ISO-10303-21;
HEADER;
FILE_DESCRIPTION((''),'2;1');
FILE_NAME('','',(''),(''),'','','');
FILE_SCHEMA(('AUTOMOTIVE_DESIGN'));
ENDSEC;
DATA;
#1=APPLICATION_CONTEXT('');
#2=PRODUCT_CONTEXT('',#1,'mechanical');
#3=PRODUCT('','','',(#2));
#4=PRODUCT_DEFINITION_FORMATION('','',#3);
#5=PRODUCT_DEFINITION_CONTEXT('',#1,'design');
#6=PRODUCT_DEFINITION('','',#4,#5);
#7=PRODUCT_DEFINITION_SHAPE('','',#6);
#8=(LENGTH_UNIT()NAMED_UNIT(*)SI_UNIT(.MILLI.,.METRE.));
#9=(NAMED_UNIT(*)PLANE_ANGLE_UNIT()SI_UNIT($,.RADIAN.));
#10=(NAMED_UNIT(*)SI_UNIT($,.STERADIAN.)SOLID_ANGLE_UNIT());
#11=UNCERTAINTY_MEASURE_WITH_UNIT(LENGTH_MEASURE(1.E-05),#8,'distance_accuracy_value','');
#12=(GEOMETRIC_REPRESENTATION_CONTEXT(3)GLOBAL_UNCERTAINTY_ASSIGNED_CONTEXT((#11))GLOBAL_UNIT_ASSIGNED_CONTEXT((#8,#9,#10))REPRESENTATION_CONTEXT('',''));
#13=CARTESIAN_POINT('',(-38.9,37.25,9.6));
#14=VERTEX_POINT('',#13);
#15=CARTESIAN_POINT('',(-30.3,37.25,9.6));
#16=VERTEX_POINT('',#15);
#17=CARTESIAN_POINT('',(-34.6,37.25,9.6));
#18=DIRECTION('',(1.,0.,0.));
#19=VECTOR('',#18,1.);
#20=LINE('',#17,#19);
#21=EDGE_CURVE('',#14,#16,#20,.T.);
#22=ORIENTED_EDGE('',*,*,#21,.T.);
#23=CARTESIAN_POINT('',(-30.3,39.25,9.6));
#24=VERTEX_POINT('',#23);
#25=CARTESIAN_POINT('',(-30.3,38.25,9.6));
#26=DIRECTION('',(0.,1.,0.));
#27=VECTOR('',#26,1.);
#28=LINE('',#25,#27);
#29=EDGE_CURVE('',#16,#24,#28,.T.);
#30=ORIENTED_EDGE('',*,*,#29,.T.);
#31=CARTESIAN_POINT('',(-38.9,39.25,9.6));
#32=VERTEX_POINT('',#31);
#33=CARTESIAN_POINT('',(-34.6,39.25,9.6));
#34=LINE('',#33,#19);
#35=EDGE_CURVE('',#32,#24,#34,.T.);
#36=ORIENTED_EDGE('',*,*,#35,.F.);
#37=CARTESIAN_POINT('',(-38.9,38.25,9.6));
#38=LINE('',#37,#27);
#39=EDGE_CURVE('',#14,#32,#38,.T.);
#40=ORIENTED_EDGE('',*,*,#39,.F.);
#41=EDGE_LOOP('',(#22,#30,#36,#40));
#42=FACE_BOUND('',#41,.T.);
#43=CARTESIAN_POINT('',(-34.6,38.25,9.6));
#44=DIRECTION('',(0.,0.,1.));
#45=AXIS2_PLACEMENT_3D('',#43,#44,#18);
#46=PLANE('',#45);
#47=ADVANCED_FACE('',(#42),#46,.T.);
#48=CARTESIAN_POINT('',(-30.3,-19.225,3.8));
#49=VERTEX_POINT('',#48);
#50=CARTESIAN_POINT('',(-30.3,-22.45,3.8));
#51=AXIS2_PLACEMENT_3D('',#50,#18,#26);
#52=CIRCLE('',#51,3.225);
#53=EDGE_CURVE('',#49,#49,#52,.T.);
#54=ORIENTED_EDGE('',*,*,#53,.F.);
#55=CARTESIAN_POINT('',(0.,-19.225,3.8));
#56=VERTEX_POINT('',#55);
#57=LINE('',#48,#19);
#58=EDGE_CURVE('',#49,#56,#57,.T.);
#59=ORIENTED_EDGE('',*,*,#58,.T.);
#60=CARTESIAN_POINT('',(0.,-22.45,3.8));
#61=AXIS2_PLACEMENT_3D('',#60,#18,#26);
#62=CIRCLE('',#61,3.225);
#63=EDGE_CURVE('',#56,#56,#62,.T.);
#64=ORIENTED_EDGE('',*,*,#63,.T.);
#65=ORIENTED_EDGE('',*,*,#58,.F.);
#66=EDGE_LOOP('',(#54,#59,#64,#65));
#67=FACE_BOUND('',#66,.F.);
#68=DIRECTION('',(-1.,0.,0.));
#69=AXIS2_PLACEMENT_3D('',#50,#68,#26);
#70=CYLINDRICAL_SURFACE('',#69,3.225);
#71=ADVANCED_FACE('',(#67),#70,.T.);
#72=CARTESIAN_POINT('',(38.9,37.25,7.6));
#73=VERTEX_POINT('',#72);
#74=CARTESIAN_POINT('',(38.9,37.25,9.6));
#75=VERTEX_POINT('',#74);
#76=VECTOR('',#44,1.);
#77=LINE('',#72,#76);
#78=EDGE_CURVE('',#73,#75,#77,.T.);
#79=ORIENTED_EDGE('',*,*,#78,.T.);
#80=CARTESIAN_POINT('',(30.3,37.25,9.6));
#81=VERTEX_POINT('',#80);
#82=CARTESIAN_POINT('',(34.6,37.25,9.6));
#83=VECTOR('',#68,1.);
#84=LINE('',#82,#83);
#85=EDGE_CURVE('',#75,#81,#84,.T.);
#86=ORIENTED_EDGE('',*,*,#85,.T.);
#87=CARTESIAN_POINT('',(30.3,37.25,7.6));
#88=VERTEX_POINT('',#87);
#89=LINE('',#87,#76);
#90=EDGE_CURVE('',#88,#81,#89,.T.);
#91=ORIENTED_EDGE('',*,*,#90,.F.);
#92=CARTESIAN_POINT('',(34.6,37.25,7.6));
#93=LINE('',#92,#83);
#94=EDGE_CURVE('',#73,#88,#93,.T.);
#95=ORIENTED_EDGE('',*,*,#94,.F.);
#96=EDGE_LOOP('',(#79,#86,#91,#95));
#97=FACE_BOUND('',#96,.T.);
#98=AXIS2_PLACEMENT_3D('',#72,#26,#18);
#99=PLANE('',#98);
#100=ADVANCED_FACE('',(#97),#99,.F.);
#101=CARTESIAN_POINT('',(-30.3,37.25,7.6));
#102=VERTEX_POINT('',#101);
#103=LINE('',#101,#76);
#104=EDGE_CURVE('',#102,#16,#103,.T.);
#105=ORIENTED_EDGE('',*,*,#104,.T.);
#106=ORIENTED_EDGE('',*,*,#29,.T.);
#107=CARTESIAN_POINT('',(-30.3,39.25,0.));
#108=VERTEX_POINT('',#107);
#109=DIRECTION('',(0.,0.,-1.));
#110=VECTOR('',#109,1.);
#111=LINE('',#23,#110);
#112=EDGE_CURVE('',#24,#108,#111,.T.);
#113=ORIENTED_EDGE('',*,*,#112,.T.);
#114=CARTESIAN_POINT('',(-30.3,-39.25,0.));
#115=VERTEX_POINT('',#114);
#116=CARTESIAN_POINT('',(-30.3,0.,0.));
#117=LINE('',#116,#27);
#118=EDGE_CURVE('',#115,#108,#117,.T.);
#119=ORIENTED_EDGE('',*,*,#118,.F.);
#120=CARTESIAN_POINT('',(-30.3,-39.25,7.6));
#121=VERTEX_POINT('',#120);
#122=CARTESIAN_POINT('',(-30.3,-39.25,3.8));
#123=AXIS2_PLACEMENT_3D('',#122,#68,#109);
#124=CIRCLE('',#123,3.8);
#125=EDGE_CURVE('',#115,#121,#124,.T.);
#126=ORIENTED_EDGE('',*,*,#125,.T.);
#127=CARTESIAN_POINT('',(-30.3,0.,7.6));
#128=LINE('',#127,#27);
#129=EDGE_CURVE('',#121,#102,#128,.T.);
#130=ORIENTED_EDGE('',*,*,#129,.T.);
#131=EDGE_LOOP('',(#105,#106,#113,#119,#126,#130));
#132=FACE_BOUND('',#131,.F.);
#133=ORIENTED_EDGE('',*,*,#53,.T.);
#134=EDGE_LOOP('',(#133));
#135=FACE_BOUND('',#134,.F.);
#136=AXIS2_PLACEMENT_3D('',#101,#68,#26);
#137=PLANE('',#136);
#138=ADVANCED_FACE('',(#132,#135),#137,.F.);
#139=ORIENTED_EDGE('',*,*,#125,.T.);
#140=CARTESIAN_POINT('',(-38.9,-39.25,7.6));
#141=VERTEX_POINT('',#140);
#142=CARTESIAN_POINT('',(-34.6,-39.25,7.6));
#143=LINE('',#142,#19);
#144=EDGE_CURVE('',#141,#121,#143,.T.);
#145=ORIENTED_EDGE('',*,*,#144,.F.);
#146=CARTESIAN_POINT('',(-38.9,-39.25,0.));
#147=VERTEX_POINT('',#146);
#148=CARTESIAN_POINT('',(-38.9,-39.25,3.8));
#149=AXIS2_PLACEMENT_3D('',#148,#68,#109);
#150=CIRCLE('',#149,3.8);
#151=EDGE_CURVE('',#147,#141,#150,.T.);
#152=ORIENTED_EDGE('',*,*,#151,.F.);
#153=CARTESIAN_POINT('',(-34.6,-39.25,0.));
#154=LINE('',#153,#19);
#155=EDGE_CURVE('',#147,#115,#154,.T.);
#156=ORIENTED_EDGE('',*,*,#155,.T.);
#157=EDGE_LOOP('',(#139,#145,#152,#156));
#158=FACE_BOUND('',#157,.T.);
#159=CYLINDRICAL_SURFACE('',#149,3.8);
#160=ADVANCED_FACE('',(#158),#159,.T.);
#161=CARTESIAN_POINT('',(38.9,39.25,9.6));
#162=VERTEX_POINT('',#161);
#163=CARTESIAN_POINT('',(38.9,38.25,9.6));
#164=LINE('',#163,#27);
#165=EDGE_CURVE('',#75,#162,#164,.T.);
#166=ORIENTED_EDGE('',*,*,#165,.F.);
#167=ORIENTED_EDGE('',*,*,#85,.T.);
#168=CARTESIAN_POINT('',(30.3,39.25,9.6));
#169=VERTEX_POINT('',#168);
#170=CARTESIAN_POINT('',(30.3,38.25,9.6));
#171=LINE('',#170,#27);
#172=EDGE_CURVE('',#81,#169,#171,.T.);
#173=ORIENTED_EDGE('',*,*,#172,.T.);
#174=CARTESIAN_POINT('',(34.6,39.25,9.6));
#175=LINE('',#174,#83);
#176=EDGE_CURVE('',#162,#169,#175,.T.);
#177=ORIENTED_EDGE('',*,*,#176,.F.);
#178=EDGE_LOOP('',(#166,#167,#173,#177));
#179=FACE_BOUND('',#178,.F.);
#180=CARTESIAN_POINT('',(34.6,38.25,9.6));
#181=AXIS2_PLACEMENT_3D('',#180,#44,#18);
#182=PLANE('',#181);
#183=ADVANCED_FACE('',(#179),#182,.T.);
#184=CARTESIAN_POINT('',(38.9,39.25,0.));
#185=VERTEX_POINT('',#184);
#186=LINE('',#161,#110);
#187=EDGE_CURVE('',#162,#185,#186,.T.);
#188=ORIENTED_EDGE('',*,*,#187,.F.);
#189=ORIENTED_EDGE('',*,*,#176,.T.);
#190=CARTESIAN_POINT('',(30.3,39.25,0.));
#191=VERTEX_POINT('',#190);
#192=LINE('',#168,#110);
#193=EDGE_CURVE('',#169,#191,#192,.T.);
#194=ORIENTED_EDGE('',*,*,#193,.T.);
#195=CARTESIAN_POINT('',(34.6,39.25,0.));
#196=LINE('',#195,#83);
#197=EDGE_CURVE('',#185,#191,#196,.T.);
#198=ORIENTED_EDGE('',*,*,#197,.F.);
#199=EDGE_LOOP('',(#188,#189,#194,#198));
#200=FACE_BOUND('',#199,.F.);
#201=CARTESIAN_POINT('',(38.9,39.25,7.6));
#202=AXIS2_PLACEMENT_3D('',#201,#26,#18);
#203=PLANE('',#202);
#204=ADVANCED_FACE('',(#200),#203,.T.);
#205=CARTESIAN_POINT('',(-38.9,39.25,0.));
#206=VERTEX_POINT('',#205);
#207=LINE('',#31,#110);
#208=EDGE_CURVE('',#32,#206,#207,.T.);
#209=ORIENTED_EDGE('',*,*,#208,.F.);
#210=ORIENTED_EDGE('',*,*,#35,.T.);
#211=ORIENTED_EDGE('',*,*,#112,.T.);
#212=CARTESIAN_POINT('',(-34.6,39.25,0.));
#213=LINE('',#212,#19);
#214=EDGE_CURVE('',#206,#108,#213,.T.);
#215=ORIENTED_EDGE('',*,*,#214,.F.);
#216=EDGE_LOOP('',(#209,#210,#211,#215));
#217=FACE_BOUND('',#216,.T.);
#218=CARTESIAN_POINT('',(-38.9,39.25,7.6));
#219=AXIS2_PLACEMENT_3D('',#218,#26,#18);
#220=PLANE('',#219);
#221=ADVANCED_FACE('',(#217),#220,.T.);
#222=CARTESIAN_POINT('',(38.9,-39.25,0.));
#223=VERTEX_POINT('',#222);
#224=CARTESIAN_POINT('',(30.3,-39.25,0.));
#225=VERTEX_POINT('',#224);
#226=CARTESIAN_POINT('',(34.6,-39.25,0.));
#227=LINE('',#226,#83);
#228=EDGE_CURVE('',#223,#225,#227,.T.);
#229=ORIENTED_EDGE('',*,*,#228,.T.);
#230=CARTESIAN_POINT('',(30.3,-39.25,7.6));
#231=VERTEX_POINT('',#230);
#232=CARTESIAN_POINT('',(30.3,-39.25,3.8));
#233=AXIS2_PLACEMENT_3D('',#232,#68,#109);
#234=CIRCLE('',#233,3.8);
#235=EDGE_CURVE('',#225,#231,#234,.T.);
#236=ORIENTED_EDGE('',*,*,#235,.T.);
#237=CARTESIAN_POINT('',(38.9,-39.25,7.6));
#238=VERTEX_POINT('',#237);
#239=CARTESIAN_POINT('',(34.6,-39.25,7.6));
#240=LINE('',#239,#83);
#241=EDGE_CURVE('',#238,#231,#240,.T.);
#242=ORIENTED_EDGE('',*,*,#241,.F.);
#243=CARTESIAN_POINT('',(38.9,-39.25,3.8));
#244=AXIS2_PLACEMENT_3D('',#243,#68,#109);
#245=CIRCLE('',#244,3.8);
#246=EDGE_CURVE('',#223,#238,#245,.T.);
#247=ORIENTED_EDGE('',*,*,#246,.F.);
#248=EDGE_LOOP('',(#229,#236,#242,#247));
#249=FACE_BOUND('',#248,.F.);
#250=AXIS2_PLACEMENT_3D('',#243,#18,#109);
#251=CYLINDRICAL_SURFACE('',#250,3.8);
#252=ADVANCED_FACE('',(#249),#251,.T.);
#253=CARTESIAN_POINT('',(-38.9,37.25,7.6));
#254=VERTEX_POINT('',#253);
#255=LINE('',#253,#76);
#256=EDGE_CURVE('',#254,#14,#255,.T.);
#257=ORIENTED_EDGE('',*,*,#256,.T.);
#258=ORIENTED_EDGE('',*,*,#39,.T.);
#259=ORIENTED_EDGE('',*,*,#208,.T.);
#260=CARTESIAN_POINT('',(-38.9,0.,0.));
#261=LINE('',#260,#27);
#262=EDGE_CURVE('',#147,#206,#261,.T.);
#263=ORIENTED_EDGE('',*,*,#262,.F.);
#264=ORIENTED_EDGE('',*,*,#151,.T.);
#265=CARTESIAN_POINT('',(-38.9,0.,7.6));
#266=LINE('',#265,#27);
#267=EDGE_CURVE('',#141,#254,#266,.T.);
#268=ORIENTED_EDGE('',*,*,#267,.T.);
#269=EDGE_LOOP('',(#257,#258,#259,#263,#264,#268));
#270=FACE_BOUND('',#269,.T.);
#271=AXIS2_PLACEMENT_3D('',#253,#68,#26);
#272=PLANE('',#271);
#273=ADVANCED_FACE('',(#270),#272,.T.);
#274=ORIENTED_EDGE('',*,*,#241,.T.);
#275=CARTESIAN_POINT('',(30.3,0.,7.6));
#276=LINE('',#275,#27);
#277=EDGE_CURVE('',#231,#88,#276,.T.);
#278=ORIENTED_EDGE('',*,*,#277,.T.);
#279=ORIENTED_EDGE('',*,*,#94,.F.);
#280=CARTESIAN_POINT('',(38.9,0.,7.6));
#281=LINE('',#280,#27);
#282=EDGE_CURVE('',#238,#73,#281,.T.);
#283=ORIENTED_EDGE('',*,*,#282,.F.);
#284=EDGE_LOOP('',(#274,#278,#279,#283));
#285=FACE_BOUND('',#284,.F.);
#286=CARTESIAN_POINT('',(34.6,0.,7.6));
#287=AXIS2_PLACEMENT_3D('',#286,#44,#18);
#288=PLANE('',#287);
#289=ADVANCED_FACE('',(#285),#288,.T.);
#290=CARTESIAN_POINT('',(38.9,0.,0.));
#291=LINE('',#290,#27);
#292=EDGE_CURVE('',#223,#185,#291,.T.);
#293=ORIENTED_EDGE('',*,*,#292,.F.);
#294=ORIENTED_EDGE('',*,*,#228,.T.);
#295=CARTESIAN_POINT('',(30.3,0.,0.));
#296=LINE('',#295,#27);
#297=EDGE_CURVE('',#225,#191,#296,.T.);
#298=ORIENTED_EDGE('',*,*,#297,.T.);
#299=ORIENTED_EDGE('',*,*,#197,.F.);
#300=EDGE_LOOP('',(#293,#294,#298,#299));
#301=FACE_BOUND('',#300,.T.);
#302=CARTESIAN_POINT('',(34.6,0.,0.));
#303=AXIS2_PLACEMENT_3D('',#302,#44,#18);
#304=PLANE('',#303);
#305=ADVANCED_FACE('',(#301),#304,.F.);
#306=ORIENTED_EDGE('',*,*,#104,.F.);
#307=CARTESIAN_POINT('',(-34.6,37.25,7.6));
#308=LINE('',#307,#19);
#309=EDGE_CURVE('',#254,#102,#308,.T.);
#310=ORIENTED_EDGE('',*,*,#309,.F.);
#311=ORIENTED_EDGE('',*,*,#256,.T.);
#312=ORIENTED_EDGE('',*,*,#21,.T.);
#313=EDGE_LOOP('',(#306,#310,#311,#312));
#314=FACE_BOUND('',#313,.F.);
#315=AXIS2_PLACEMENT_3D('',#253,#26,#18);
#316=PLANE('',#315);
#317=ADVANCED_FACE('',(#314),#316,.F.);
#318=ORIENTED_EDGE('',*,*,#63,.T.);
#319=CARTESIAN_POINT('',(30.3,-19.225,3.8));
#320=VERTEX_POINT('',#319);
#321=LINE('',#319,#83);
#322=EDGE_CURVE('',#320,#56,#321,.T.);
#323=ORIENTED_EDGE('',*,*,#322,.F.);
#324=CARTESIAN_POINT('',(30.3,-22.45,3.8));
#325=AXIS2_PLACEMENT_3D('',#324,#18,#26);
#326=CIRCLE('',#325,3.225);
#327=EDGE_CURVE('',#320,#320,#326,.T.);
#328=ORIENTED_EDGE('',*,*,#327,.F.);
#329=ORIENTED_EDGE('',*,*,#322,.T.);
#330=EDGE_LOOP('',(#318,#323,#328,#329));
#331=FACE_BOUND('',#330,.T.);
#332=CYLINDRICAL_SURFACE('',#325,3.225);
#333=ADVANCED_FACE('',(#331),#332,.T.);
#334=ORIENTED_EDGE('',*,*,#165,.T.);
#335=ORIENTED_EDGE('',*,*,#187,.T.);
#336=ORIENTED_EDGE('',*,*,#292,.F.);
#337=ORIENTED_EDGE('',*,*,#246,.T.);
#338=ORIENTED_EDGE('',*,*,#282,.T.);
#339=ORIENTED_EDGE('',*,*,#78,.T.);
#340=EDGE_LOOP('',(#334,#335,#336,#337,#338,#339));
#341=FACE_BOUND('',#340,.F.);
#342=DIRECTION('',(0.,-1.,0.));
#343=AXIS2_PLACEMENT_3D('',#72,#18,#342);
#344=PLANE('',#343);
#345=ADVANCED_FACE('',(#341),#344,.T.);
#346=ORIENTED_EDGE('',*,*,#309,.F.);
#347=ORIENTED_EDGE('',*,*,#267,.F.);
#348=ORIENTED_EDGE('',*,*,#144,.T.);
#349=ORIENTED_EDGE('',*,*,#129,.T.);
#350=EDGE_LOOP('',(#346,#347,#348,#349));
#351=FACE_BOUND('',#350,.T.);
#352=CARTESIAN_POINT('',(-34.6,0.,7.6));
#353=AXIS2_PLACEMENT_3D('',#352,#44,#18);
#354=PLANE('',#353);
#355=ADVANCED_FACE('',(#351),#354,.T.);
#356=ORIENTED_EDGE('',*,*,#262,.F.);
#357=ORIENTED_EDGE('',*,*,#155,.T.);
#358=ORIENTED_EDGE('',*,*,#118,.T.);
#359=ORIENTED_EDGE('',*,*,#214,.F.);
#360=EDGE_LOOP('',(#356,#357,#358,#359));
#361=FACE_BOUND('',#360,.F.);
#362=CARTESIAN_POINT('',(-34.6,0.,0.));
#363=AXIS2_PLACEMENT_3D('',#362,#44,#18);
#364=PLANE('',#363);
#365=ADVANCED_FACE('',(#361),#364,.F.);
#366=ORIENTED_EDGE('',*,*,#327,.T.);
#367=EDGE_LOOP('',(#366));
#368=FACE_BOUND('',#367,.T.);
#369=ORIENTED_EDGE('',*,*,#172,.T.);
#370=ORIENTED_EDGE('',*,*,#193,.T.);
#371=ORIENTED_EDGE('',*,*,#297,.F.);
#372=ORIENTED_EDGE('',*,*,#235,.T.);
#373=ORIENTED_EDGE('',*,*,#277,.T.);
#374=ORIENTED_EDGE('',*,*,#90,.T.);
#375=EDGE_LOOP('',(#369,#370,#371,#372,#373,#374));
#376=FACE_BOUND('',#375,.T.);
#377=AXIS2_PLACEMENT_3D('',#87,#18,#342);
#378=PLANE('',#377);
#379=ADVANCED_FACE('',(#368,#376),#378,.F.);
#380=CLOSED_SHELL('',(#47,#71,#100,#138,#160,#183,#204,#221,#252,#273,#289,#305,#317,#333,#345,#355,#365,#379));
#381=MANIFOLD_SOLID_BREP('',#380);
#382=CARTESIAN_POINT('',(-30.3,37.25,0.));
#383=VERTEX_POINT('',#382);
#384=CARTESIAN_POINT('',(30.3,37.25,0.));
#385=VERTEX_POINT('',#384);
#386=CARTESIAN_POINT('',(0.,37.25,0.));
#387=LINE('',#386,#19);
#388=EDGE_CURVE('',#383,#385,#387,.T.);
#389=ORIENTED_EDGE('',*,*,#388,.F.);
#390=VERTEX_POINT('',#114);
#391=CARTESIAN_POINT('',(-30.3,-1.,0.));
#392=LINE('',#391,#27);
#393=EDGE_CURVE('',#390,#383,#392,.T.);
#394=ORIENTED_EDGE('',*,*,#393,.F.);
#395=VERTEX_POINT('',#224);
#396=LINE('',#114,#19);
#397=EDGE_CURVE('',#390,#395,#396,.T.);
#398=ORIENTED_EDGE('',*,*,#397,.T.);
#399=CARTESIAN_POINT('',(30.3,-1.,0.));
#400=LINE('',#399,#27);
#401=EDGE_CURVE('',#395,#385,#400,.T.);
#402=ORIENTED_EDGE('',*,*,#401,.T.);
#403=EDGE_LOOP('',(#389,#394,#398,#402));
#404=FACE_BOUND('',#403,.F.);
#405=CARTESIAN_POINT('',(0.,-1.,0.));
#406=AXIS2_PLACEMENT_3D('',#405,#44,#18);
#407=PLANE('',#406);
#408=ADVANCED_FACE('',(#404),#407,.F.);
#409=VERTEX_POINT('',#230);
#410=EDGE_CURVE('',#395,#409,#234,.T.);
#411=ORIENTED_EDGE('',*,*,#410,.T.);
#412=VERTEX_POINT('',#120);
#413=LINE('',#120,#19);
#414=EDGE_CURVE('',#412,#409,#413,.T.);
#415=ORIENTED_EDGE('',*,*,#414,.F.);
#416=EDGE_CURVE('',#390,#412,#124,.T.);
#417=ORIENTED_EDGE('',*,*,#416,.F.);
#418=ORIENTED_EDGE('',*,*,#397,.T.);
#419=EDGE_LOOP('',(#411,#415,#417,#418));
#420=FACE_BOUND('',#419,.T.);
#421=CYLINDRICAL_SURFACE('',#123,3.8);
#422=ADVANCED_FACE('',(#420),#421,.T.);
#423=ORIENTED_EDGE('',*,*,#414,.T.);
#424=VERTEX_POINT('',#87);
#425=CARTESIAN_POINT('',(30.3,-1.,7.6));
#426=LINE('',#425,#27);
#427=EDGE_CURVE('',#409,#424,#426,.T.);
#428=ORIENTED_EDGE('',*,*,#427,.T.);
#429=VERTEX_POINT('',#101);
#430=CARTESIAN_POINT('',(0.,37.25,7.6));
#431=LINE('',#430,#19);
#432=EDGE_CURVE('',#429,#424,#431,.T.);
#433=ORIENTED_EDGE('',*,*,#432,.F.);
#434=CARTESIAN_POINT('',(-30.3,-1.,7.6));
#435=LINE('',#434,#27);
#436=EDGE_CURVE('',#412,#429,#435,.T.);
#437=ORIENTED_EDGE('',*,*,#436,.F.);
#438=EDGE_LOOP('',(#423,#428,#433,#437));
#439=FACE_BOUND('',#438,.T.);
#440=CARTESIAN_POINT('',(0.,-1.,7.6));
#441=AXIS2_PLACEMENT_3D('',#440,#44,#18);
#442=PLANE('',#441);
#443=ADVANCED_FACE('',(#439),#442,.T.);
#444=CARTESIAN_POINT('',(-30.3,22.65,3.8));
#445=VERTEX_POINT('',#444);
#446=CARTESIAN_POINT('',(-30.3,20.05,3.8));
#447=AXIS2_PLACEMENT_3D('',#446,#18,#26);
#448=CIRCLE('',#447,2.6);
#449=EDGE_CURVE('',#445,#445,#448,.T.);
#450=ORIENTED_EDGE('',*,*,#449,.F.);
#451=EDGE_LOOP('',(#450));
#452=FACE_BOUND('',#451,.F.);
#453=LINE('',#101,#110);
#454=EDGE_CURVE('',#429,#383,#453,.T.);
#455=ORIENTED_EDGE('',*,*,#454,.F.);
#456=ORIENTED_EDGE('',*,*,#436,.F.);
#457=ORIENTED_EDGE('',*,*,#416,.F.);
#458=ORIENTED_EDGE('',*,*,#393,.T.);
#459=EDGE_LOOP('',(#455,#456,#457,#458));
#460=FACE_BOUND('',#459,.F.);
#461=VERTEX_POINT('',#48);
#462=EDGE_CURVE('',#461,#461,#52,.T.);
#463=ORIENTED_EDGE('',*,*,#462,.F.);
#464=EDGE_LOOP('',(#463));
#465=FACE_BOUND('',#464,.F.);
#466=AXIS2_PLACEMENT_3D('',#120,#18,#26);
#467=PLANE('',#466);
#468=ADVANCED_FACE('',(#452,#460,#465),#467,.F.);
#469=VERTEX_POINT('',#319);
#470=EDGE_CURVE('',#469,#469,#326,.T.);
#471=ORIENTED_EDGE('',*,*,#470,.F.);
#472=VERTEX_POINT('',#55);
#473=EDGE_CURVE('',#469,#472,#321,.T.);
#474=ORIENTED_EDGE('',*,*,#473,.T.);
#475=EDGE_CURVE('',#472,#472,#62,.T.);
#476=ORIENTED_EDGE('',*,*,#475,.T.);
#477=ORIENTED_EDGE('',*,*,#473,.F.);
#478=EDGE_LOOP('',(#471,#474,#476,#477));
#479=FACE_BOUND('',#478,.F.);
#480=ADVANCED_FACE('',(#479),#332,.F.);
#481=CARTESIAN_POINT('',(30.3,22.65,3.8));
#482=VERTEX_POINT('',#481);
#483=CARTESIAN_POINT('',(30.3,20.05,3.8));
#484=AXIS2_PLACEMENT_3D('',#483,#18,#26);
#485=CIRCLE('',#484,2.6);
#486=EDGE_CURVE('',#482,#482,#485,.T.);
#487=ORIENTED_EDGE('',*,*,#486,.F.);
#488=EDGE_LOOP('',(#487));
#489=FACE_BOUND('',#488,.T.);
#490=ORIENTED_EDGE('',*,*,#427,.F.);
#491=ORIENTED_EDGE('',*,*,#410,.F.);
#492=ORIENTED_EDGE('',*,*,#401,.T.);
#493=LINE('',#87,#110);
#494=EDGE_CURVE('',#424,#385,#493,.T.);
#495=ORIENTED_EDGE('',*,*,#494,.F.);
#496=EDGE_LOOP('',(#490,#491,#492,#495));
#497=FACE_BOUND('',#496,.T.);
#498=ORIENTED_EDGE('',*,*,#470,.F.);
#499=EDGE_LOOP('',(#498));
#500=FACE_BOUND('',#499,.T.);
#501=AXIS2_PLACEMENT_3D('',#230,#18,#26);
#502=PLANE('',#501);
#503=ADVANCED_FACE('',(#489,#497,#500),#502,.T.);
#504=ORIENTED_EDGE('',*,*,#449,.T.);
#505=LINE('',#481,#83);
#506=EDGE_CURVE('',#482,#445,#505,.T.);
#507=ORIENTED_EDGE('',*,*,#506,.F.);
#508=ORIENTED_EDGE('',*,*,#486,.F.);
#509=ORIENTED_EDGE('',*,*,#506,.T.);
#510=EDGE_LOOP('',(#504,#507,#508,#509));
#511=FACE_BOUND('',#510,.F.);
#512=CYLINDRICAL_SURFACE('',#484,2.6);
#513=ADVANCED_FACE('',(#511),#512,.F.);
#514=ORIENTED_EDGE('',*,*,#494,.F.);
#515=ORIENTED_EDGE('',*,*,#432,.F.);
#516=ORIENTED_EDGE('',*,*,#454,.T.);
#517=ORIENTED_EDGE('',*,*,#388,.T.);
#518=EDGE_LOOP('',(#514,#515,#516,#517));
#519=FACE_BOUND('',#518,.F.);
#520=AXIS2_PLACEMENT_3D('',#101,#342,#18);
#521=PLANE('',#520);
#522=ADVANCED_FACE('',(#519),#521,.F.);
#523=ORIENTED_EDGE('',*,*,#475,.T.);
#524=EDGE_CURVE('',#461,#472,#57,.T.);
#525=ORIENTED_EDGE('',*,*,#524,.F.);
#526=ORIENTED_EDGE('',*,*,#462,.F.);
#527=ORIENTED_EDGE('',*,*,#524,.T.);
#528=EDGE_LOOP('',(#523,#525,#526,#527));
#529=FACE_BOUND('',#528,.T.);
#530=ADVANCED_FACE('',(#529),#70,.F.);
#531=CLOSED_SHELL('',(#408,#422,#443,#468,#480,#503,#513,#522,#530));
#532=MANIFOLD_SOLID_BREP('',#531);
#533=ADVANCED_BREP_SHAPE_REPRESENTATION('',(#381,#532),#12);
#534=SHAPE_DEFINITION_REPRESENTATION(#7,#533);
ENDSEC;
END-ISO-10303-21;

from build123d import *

# Parameters (mm, degrees)
F0_W      = 8.6
F0_H      = 78.5
F1_DEPTH  = 7.6
F3_DEPTH  = 8.6
F4_W      = 8.6
F4_H      = 2
F5_DEPTH  = 2
F6_R      = 3.225
F7_DEPTH  = 30.3
F9_W      = 60.6
F9_H      = 76.5
F10_DEPTH = 7.6
F12_DEPTH = 60.6
F14_R     = 2.6
F15_DEPTH = 60.6


# Not quite as in the source:
# - a feature names something its author has since deleted; it is built from what else it names


with BuildPart() as f1:
    # F0 (on Top) → F1 (new body)
    with BuildSketch(Plane.XY):
        with Locations((-34.6, 0)):
            Rectangle(F0_W, F0_H)
    extrude(amount=F1_DEPTH)

    # F2 (on face) → F3 (join)
    with BuildSketch(Plane(origin=(-38.9, 0, 0), x_dir=(0, -1, 0), z_dir=(-1, 0, 0))):
        with BuildLine():
            Line((39.25, 7.6), (39.25, 0))
            ThreePointArc((39.25, 0), (43.05, 3.8), (39.25, 7.6))
        make_face()
    extrude(amount=-F3_DEPTH)

    # F4 (on face) → F5 (join)
    with BuildSketch(Plane.XY.offset(7.6)):
        with Locations((-34.6, 38.25)):
            Rectangle(F4_W, F4_H)
    extrude(amount=F5_DEPTH)

    # F6 (on face) → F7 (join)
    with BuildSketch(Plane.YZ.offset(-30.3)):
        with Locations((-22.45, 3.8)):
            Circle(F6_R)
    extrude(amount=F7_DEPTH)

    # F8: F1 across plane


with BuildPart() as f1_1:
    add(f1.part)
    add(f1.part.mirror(Plane.YZ))


with BuildPart() as f10:
    # F9 (on face) → F10 (new body)
    with BuildSketch(Plane.XY.offset(7.6)):
        with Locations((0, -1)):
            Rectangle(F9_W, F9_H)
    extrude(amount=-F10_DEPTH)


with BuildPart() as f12:
    # F11 (on face) → F12 (new body)
    with BuildSketch(Plane(origin=(-30.3, 0, 0), x_dir=(0, -1, 0), z_dir=(-1, 0, 0))):
        with BuildLine():
            Line((39.25, 7.6), (39.25, 0))
            ThreePointArc((39.25, 0), (43.05, 3.8), (39.25, 7.6))
        make_face()
    extrude(amount=-F12_DEPTH)

    # F13: union F10
    add(f10.part)

    # F14 (on face) → F15 (cut)
    with BuildSketch(Plane.YZ.offset(30.3)):
        with Locations((20.05, 3.8)):
            Circle(F14_R)
    extrude(amount=-F15_DEPTH, mode=Mode.SUBTRACT)

    # F17: cut F1
    add(f1_1.part, mode=Mode.SUBTRACT)


solid = Compound([f1_1.part, f12.part])
